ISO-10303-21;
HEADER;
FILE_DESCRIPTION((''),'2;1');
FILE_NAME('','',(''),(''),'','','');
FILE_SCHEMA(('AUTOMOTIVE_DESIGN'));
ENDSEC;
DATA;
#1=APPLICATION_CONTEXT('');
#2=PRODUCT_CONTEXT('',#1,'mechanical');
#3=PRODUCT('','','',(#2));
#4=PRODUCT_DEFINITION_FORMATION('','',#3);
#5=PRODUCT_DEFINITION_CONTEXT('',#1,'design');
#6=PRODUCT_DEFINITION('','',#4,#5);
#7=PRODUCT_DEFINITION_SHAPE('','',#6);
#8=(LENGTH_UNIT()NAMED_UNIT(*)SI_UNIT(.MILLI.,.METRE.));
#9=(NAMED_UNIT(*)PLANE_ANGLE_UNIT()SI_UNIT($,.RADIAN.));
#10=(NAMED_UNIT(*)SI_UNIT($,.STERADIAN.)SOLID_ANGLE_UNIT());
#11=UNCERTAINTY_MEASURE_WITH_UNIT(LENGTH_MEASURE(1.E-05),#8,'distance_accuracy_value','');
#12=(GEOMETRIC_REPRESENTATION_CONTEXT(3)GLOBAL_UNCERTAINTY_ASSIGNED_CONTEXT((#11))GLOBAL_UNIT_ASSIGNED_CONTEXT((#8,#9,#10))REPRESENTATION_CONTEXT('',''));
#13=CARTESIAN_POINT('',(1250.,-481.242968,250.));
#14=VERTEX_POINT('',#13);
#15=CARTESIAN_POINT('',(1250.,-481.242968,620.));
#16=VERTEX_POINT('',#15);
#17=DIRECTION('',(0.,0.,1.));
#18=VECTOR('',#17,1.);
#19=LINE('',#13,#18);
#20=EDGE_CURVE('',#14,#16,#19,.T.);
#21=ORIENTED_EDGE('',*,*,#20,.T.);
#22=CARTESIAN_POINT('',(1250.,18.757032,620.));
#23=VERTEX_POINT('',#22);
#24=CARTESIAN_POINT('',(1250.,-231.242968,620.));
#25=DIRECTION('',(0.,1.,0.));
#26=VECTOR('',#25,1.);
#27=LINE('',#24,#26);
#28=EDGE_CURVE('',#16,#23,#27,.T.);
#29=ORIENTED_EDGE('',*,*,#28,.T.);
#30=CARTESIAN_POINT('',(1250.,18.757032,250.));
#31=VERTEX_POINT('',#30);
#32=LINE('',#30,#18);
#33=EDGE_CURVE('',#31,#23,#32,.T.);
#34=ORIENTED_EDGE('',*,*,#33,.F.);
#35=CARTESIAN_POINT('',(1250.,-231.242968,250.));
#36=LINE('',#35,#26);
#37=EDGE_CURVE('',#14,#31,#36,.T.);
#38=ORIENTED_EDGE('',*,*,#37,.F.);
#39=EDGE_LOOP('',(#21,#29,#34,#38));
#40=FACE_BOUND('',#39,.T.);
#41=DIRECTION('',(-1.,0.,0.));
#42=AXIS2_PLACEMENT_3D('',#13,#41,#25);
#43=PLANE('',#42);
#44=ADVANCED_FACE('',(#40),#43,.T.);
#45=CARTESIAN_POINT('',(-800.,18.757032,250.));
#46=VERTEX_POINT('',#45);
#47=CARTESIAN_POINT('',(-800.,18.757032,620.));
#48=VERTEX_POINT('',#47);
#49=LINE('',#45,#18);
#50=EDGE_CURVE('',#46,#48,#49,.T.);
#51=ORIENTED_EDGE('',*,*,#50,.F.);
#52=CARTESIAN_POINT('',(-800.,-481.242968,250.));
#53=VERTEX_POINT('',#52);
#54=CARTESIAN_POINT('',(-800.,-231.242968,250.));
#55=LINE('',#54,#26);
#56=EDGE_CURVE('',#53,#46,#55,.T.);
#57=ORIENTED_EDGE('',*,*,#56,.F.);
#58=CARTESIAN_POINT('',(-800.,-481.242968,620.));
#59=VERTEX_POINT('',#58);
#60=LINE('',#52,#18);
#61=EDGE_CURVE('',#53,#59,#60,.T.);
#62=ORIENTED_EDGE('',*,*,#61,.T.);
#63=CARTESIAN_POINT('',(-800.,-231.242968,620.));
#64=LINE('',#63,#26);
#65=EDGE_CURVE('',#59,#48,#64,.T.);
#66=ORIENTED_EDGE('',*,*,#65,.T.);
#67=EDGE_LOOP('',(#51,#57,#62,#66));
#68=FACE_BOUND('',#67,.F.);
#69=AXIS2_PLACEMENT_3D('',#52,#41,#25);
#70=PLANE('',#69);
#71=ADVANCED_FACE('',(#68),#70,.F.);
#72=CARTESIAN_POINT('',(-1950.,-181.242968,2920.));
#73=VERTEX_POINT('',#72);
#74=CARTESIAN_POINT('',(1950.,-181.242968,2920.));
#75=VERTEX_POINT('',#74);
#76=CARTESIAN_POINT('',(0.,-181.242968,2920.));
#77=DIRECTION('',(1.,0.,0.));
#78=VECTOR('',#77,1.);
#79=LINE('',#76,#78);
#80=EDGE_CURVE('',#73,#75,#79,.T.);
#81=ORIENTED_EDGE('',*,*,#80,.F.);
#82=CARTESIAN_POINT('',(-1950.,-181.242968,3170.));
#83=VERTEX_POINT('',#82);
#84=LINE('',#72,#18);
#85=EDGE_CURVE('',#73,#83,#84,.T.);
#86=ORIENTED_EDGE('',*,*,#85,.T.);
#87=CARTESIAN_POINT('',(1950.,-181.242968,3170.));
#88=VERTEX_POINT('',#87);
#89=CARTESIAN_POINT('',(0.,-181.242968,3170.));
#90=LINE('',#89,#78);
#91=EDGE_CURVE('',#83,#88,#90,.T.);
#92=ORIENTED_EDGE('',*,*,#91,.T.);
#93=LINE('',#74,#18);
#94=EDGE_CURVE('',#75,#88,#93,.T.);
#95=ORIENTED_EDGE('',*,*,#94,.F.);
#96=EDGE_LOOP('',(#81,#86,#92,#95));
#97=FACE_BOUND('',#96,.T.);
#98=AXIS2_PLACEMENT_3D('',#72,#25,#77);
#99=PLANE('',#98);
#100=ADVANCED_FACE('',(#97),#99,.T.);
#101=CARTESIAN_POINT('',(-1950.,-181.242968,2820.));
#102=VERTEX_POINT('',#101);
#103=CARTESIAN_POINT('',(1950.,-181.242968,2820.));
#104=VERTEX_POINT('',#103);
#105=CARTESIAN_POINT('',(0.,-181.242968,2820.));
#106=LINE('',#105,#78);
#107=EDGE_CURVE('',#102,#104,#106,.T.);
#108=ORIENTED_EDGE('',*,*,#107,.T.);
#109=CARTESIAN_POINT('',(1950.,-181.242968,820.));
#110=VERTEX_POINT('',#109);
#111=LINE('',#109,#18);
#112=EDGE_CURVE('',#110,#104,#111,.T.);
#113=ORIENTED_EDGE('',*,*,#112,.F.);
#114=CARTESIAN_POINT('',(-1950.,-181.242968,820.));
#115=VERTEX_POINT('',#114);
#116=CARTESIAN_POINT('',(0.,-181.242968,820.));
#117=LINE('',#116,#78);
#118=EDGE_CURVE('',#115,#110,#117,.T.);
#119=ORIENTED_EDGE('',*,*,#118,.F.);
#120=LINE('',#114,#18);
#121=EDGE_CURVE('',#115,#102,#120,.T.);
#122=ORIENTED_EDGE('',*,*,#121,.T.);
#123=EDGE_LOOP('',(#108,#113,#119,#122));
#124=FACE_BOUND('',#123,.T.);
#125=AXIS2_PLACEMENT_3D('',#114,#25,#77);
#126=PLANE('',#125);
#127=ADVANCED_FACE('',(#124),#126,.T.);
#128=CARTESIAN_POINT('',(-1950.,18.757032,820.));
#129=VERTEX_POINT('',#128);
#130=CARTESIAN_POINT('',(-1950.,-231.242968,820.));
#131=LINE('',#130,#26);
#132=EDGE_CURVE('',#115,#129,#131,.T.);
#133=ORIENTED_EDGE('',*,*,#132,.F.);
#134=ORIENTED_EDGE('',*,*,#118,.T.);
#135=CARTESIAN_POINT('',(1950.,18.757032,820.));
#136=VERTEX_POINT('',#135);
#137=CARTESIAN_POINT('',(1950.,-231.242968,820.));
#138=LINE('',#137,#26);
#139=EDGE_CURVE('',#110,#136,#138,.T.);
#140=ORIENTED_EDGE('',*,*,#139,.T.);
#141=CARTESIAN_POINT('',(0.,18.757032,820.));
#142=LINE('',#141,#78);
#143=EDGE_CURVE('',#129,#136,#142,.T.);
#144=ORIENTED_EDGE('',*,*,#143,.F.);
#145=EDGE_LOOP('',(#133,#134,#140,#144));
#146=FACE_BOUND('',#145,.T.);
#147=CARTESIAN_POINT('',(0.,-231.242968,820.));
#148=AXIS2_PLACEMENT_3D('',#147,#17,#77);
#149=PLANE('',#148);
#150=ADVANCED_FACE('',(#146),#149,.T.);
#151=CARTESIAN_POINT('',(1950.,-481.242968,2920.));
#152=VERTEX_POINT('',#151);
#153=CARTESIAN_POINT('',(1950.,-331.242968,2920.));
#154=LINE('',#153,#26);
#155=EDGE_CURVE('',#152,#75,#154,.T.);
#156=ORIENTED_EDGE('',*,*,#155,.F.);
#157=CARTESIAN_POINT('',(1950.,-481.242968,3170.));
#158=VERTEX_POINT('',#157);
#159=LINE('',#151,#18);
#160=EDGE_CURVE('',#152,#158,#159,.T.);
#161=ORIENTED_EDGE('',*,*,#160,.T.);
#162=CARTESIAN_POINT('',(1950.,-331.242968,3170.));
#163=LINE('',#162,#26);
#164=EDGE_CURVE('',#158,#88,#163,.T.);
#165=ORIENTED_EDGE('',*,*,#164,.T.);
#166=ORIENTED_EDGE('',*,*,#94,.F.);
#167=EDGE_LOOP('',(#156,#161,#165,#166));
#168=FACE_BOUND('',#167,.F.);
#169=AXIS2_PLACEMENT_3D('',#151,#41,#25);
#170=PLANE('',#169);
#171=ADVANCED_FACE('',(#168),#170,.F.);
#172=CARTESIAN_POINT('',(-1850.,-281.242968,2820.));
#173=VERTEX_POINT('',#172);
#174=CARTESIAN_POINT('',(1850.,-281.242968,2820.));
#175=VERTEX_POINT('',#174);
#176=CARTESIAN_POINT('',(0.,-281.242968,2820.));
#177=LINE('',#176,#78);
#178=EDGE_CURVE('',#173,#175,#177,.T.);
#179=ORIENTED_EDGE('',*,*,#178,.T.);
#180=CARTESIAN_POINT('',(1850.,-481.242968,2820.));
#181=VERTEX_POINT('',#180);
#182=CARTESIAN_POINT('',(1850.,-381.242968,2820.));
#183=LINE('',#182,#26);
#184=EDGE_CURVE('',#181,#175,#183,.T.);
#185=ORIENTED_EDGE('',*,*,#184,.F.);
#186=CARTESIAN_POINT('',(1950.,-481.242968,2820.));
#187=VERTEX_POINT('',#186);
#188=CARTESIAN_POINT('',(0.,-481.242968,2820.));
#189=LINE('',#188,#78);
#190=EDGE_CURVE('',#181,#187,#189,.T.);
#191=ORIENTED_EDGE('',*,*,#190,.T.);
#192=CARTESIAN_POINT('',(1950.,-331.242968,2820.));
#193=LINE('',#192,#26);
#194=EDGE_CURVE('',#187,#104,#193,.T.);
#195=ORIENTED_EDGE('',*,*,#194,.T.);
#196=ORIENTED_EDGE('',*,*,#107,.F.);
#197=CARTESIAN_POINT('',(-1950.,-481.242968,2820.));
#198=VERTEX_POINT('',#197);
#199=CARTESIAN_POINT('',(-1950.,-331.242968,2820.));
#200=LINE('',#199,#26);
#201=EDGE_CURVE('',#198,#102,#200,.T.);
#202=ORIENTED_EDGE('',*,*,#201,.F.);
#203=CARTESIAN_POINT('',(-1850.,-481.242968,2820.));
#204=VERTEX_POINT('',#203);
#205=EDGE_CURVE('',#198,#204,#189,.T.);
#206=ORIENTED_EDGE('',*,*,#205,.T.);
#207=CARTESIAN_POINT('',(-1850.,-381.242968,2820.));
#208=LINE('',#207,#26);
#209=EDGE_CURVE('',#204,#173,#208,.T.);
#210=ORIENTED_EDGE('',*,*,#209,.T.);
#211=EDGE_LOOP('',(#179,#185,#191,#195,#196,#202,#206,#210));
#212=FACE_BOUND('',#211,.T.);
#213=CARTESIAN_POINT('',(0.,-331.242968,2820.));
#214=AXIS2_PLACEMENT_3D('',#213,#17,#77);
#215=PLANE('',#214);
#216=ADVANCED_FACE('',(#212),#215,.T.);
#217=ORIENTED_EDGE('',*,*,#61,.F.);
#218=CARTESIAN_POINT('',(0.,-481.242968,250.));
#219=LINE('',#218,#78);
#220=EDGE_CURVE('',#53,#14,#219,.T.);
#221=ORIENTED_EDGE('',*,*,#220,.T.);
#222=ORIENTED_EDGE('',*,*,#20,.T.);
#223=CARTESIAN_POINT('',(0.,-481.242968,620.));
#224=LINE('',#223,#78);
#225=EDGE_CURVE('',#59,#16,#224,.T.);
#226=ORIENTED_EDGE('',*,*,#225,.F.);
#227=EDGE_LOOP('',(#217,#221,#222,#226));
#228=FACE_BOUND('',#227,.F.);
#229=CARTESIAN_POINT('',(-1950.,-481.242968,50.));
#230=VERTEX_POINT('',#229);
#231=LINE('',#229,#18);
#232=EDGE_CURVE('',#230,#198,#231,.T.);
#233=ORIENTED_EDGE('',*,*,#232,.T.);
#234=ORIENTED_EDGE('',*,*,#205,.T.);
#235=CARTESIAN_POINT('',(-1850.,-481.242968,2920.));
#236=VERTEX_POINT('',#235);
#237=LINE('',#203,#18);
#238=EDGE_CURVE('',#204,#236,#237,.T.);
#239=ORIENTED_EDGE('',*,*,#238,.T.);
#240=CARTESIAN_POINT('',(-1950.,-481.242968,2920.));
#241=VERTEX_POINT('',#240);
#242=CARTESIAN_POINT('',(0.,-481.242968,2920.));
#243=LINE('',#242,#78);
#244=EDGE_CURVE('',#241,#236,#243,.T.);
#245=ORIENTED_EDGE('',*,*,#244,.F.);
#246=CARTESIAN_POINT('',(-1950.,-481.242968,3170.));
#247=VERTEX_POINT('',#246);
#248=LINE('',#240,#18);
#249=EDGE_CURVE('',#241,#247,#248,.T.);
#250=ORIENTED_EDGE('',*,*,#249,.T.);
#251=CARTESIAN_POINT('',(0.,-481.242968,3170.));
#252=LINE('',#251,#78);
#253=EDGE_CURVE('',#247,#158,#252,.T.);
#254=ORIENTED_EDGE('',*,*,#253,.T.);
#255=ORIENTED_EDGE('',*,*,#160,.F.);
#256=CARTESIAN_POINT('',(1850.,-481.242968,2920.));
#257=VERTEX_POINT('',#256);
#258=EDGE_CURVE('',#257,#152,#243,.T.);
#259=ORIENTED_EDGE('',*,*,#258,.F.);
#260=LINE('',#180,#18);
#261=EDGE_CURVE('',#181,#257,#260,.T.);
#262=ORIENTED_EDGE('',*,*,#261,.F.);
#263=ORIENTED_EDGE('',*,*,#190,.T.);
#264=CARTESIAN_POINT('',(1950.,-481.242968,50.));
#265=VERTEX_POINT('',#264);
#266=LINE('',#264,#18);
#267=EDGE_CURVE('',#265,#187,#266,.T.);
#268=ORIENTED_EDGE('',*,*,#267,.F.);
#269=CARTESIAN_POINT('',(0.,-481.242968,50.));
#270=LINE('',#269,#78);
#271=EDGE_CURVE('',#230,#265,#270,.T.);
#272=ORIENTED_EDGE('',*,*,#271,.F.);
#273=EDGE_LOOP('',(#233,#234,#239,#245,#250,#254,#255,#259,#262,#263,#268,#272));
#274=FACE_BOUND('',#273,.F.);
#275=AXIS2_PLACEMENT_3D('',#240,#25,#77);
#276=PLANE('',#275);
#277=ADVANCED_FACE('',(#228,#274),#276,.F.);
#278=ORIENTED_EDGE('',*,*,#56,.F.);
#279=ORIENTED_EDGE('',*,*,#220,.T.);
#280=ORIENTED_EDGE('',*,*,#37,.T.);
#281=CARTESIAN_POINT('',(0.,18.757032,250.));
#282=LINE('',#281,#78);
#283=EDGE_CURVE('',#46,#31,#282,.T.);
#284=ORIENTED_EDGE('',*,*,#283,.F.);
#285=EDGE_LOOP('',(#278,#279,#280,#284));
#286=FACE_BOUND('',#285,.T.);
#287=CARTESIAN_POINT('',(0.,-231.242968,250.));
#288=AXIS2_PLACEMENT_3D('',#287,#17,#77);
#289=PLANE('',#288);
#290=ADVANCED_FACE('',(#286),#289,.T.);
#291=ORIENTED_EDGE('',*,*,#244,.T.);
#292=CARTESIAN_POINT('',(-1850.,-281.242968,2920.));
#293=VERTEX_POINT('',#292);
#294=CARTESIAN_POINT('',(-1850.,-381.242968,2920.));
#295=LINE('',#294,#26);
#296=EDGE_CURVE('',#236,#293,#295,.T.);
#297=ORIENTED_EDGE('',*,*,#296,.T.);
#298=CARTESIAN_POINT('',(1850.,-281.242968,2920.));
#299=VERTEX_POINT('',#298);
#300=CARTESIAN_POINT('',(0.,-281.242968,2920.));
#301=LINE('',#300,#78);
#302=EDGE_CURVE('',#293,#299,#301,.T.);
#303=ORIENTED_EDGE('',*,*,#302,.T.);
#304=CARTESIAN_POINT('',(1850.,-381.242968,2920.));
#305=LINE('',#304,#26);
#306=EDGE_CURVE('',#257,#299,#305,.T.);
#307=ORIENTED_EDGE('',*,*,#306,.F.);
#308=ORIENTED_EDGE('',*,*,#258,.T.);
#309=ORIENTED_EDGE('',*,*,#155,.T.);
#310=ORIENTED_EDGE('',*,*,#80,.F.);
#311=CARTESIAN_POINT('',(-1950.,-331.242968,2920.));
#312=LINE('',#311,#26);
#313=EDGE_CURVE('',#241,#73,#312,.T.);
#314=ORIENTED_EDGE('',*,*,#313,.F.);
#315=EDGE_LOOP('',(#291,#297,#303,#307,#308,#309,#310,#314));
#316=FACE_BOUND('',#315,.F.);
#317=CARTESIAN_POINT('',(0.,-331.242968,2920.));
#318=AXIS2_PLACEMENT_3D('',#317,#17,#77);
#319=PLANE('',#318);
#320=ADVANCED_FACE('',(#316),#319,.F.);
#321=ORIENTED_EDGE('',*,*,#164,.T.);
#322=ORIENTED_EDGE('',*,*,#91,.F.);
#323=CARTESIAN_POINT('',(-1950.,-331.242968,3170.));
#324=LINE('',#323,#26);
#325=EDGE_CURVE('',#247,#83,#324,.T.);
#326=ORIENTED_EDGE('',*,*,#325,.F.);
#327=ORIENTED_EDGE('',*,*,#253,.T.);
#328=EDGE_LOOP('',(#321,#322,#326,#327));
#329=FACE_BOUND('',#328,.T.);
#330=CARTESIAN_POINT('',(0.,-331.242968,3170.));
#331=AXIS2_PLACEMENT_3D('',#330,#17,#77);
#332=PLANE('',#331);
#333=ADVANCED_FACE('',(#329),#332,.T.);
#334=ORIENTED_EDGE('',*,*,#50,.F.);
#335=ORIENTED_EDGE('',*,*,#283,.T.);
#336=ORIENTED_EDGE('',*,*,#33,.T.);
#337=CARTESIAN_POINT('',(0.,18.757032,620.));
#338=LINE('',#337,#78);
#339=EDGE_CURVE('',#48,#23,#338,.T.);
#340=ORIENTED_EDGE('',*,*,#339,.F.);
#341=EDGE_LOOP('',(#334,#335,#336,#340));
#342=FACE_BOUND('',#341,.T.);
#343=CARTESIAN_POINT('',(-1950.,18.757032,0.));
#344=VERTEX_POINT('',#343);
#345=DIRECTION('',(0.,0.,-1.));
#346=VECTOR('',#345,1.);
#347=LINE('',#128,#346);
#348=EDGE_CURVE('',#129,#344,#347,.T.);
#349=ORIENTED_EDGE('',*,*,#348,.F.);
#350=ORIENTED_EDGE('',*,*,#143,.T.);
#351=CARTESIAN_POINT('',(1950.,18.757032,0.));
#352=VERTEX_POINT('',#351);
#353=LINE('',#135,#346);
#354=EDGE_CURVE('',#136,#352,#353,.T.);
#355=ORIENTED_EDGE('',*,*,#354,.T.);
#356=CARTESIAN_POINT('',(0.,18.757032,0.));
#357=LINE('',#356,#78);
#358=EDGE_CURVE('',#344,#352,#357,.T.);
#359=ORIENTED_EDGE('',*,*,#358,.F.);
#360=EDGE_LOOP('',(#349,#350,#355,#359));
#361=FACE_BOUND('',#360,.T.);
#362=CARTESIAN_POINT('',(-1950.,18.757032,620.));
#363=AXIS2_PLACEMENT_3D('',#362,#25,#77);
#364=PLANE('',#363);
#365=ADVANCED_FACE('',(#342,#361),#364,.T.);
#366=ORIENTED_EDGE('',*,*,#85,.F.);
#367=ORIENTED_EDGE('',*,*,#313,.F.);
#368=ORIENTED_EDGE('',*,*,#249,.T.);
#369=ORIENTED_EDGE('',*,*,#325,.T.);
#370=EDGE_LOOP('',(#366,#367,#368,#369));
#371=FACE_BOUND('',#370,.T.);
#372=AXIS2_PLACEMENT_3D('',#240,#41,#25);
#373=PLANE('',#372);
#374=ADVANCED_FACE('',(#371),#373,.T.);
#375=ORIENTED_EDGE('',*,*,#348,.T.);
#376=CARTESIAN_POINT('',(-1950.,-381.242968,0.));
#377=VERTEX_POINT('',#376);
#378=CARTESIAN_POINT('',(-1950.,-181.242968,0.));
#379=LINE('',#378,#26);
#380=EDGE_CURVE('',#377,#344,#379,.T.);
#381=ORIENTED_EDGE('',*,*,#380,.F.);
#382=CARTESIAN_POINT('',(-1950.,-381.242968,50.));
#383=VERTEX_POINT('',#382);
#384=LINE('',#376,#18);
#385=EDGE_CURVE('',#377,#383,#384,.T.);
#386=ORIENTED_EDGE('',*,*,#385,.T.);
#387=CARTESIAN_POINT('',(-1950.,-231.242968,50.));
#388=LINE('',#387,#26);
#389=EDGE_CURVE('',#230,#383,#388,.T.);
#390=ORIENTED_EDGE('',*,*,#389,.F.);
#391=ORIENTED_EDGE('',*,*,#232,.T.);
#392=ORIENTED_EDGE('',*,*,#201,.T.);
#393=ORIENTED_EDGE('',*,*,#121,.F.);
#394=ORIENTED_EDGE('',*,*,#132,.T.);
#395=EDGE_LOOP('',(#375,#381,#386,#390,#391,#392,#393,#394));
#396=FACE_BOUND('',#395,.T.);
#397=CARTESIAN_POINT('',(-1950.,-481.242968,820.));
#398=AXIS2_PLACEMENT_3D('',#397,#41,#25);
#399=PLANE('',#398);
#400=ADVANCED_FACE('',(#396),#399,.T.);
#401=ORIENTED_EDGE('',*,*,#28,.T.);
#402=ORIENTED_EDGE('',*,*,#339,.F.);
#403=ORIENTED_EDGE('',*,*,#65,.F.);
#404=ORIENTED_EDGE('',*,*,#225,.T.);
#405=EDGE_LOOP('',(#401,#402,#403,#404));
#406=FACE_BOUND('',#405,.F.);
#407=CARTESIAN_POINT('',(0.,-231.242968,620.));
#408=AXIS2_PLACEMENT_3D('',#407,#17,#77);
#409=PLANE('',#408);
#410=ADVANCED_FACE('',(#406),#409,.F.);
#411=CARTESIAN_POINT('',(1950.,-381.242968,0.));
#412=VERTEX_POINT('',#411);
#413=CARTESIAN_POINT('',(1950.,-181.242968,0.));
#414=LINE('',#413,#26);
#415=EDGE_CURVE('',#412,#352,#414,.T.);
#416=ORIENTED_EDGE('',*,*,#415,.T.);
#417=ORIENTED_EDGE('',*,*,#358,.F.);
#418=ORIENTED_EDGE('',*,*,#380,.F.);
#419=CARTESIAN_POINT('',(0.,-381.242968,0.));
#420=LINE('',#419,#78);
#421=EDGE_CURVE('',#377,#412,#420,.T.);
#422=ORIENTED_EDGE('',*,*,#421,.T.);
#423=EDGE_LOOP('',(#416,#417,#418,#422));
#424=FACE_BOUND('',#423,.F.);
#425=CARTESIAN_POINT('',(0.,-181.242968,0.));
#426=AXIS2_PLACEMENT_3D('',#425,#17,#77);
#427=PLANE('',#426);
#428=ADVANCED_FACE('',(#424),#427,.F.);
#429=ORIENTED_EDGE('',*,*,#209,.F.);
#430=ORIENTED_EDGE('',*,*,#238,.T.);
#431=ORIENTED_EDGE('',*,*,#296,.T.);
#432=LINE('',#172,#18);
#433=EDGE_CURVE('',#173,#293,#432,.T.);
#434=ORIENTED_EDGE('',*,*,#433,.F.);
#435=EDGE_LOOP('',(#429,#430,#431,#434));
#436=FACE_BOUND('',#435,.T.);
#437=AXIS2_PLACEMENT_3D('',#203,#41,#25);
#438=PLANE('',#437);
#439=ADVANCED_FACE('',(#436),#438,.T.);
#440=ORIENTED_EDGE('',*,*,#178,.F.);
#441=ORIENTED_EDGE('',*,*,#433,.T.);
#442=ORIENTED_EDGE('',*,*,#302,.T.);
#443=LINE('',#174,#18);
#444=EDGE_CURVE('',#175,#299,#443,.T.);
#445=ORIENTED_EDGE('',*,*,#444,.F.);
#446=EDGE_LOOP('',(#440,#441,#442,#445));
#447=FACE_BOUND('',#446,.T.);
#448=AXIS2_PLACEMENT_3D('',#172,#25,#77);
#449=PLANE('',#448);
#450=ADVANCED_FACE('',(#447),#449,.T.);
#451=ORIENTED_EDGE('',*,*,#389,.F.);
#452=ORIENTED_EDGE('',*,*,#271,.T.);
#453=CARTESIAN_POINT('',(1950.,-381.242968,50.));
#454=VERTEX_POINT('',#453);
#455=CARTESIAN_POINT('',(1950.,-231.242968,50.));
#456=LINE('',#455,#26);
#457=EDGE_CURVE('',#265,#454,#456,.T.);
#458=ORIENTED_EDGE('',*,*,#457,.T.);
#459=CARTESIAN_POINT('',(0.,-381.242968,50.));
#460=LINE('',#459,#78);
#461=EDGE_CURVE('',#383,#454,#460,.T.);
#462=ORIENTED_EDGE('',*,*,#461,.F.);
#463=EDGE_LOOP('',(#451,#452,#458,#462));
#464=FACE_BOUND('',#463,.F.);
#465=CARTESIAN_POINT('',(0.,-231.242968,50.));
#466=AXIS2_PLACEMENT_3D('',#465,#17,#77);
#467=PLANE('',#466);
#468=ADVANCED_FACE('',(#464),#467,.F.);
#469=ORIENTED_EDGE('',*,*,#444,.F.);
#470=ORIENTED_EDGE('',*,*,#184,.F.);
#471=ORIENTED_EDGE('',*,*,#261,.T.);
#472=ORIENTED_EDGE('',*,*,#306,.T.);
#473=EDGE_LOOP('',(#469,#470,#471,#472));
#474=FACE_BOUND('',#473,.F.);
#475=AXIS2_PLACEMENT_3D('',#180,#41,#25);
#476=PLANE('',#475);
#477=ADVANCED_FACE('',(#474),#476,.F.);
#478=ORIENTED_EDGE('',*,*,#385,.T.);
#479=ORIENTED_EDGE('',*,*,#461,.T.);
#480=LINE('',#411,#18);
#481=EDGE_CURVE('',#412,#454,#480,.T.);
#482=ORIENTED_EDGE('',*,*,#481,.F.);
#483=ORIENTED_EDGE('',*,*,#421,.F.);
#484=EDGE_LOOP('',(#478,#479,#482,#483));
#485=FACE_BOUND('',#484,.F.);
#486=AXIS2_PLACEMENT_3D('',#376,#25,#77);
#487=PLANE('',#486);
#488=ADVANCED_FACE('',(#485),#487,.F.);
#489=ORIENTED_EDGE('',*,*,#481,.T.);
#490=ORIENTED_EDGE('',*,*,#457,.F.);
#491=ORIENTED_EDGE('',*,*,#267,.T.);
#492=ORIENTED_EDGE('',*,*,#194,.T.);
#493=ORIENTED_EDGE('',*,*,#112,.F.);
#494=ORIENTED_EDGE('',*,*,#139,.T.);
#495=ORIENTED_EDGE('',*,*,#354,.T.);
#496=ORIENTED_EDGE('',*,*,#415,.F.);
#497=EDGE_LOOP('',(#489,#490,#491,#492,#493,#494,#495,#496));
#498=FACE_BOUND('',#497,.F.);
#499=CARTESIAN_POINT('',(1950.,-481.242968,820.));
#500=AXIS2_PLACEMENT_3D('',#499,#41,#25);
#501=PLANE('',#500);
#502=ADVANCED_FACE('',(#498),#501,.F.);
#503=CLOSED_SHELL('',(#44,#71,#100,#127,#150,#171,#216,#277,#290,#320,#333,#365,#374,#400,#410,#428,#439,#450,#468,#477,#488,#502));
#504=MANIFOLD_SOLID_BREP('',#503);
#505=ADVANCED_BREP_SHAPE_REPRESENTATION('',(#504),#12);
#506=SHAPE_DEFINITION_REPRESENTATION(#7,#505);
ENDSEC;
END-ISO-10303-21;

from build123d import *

# Parameters (mm, degrees)
F0_W      = 3900
F0_H      = 400
F1_DEPTH  = 50
F2_W      = 3900
F2_H      = 500
F3_DEPTH  = 200
F4_W      = 700
F4_H      = 500
F4_W_2    = 1150
F5_DEPTH  = 370
F6_W      = 3900
F6_H      = 500
F7_DEPTH  = 200
F8_W      = 3900
F8_H      = 300
F9_DEPTH  = 2000
F10_W     = 3700
F10_H     = 200
F11_DEPTH = 100
F12_W     = 3900
F12_H     = 300
F13_DEPTH = 250


# Not quite as in the source:
# - a feature names something its author has since deleted; it is built from what else it names


with BuildPart() as f1:
    # F0 (on Top) → F1 (new body)
    with BuildSketch(Plane.XY):
        with Locations((0, -181.2429684355)):
            Rectangle(F0_W, F0_H)
    extrude(amount=F1_DEPTH)

    # F2 (on face) → F3 (join)
    with BuildSketch(Plane.XY.offset(50)):
        with Locations((0, -231.2429684355)):
            Rectangle(F2_W, F2_H)
    extrude(amount=F3_DEPTH)

    # F4 (on face) → F5 (join)
    with BuildSketch(Plane.XY.offset(250)):
        with Locations((1600, -231.2429684355)):
            Rectangle(F4_W, F4_H)
        with Locations((-1375, -231.2429684355)):
            Rectangle(F4_W_2, F4_H)
    extrude(amount=F5_DEPTH)

    # F6 (on face) → F7 (join)
    with BuildSketch(Plane.XY.offset(620)):
        with Locations((0, -231.2429684355)):
            Rectangle(F6_W, F6_H)
    extrude(amount=F7_DEPTH)

    # F8 (on face) → F9 (join)
    with BuildSketch(Plane.XY.offset(820)):
        with Locations((0, -331.2429684355)):
            Rectangle(F8_W, F8_H)
    extrude(amount=F9_DEPTH)

    # F10 (on face) → F11 (join)
    with BuildSketch(Plane.XY.offset(2820)):
        with Locations((0, -381.2429684355)):
            Rectangle(F10_W, F10_H)
    extrude(amount=F11_DEPTH)

    # F12 (on face) → F13 (join)
    with BuildSketch(Plane.XY.offset(2920)):
        with Locations((0, -331.2429684355)):
            Rectangle(F12_W, F12_H)
    extrude(amount=F13_DEPTH)


solid = f1.part
